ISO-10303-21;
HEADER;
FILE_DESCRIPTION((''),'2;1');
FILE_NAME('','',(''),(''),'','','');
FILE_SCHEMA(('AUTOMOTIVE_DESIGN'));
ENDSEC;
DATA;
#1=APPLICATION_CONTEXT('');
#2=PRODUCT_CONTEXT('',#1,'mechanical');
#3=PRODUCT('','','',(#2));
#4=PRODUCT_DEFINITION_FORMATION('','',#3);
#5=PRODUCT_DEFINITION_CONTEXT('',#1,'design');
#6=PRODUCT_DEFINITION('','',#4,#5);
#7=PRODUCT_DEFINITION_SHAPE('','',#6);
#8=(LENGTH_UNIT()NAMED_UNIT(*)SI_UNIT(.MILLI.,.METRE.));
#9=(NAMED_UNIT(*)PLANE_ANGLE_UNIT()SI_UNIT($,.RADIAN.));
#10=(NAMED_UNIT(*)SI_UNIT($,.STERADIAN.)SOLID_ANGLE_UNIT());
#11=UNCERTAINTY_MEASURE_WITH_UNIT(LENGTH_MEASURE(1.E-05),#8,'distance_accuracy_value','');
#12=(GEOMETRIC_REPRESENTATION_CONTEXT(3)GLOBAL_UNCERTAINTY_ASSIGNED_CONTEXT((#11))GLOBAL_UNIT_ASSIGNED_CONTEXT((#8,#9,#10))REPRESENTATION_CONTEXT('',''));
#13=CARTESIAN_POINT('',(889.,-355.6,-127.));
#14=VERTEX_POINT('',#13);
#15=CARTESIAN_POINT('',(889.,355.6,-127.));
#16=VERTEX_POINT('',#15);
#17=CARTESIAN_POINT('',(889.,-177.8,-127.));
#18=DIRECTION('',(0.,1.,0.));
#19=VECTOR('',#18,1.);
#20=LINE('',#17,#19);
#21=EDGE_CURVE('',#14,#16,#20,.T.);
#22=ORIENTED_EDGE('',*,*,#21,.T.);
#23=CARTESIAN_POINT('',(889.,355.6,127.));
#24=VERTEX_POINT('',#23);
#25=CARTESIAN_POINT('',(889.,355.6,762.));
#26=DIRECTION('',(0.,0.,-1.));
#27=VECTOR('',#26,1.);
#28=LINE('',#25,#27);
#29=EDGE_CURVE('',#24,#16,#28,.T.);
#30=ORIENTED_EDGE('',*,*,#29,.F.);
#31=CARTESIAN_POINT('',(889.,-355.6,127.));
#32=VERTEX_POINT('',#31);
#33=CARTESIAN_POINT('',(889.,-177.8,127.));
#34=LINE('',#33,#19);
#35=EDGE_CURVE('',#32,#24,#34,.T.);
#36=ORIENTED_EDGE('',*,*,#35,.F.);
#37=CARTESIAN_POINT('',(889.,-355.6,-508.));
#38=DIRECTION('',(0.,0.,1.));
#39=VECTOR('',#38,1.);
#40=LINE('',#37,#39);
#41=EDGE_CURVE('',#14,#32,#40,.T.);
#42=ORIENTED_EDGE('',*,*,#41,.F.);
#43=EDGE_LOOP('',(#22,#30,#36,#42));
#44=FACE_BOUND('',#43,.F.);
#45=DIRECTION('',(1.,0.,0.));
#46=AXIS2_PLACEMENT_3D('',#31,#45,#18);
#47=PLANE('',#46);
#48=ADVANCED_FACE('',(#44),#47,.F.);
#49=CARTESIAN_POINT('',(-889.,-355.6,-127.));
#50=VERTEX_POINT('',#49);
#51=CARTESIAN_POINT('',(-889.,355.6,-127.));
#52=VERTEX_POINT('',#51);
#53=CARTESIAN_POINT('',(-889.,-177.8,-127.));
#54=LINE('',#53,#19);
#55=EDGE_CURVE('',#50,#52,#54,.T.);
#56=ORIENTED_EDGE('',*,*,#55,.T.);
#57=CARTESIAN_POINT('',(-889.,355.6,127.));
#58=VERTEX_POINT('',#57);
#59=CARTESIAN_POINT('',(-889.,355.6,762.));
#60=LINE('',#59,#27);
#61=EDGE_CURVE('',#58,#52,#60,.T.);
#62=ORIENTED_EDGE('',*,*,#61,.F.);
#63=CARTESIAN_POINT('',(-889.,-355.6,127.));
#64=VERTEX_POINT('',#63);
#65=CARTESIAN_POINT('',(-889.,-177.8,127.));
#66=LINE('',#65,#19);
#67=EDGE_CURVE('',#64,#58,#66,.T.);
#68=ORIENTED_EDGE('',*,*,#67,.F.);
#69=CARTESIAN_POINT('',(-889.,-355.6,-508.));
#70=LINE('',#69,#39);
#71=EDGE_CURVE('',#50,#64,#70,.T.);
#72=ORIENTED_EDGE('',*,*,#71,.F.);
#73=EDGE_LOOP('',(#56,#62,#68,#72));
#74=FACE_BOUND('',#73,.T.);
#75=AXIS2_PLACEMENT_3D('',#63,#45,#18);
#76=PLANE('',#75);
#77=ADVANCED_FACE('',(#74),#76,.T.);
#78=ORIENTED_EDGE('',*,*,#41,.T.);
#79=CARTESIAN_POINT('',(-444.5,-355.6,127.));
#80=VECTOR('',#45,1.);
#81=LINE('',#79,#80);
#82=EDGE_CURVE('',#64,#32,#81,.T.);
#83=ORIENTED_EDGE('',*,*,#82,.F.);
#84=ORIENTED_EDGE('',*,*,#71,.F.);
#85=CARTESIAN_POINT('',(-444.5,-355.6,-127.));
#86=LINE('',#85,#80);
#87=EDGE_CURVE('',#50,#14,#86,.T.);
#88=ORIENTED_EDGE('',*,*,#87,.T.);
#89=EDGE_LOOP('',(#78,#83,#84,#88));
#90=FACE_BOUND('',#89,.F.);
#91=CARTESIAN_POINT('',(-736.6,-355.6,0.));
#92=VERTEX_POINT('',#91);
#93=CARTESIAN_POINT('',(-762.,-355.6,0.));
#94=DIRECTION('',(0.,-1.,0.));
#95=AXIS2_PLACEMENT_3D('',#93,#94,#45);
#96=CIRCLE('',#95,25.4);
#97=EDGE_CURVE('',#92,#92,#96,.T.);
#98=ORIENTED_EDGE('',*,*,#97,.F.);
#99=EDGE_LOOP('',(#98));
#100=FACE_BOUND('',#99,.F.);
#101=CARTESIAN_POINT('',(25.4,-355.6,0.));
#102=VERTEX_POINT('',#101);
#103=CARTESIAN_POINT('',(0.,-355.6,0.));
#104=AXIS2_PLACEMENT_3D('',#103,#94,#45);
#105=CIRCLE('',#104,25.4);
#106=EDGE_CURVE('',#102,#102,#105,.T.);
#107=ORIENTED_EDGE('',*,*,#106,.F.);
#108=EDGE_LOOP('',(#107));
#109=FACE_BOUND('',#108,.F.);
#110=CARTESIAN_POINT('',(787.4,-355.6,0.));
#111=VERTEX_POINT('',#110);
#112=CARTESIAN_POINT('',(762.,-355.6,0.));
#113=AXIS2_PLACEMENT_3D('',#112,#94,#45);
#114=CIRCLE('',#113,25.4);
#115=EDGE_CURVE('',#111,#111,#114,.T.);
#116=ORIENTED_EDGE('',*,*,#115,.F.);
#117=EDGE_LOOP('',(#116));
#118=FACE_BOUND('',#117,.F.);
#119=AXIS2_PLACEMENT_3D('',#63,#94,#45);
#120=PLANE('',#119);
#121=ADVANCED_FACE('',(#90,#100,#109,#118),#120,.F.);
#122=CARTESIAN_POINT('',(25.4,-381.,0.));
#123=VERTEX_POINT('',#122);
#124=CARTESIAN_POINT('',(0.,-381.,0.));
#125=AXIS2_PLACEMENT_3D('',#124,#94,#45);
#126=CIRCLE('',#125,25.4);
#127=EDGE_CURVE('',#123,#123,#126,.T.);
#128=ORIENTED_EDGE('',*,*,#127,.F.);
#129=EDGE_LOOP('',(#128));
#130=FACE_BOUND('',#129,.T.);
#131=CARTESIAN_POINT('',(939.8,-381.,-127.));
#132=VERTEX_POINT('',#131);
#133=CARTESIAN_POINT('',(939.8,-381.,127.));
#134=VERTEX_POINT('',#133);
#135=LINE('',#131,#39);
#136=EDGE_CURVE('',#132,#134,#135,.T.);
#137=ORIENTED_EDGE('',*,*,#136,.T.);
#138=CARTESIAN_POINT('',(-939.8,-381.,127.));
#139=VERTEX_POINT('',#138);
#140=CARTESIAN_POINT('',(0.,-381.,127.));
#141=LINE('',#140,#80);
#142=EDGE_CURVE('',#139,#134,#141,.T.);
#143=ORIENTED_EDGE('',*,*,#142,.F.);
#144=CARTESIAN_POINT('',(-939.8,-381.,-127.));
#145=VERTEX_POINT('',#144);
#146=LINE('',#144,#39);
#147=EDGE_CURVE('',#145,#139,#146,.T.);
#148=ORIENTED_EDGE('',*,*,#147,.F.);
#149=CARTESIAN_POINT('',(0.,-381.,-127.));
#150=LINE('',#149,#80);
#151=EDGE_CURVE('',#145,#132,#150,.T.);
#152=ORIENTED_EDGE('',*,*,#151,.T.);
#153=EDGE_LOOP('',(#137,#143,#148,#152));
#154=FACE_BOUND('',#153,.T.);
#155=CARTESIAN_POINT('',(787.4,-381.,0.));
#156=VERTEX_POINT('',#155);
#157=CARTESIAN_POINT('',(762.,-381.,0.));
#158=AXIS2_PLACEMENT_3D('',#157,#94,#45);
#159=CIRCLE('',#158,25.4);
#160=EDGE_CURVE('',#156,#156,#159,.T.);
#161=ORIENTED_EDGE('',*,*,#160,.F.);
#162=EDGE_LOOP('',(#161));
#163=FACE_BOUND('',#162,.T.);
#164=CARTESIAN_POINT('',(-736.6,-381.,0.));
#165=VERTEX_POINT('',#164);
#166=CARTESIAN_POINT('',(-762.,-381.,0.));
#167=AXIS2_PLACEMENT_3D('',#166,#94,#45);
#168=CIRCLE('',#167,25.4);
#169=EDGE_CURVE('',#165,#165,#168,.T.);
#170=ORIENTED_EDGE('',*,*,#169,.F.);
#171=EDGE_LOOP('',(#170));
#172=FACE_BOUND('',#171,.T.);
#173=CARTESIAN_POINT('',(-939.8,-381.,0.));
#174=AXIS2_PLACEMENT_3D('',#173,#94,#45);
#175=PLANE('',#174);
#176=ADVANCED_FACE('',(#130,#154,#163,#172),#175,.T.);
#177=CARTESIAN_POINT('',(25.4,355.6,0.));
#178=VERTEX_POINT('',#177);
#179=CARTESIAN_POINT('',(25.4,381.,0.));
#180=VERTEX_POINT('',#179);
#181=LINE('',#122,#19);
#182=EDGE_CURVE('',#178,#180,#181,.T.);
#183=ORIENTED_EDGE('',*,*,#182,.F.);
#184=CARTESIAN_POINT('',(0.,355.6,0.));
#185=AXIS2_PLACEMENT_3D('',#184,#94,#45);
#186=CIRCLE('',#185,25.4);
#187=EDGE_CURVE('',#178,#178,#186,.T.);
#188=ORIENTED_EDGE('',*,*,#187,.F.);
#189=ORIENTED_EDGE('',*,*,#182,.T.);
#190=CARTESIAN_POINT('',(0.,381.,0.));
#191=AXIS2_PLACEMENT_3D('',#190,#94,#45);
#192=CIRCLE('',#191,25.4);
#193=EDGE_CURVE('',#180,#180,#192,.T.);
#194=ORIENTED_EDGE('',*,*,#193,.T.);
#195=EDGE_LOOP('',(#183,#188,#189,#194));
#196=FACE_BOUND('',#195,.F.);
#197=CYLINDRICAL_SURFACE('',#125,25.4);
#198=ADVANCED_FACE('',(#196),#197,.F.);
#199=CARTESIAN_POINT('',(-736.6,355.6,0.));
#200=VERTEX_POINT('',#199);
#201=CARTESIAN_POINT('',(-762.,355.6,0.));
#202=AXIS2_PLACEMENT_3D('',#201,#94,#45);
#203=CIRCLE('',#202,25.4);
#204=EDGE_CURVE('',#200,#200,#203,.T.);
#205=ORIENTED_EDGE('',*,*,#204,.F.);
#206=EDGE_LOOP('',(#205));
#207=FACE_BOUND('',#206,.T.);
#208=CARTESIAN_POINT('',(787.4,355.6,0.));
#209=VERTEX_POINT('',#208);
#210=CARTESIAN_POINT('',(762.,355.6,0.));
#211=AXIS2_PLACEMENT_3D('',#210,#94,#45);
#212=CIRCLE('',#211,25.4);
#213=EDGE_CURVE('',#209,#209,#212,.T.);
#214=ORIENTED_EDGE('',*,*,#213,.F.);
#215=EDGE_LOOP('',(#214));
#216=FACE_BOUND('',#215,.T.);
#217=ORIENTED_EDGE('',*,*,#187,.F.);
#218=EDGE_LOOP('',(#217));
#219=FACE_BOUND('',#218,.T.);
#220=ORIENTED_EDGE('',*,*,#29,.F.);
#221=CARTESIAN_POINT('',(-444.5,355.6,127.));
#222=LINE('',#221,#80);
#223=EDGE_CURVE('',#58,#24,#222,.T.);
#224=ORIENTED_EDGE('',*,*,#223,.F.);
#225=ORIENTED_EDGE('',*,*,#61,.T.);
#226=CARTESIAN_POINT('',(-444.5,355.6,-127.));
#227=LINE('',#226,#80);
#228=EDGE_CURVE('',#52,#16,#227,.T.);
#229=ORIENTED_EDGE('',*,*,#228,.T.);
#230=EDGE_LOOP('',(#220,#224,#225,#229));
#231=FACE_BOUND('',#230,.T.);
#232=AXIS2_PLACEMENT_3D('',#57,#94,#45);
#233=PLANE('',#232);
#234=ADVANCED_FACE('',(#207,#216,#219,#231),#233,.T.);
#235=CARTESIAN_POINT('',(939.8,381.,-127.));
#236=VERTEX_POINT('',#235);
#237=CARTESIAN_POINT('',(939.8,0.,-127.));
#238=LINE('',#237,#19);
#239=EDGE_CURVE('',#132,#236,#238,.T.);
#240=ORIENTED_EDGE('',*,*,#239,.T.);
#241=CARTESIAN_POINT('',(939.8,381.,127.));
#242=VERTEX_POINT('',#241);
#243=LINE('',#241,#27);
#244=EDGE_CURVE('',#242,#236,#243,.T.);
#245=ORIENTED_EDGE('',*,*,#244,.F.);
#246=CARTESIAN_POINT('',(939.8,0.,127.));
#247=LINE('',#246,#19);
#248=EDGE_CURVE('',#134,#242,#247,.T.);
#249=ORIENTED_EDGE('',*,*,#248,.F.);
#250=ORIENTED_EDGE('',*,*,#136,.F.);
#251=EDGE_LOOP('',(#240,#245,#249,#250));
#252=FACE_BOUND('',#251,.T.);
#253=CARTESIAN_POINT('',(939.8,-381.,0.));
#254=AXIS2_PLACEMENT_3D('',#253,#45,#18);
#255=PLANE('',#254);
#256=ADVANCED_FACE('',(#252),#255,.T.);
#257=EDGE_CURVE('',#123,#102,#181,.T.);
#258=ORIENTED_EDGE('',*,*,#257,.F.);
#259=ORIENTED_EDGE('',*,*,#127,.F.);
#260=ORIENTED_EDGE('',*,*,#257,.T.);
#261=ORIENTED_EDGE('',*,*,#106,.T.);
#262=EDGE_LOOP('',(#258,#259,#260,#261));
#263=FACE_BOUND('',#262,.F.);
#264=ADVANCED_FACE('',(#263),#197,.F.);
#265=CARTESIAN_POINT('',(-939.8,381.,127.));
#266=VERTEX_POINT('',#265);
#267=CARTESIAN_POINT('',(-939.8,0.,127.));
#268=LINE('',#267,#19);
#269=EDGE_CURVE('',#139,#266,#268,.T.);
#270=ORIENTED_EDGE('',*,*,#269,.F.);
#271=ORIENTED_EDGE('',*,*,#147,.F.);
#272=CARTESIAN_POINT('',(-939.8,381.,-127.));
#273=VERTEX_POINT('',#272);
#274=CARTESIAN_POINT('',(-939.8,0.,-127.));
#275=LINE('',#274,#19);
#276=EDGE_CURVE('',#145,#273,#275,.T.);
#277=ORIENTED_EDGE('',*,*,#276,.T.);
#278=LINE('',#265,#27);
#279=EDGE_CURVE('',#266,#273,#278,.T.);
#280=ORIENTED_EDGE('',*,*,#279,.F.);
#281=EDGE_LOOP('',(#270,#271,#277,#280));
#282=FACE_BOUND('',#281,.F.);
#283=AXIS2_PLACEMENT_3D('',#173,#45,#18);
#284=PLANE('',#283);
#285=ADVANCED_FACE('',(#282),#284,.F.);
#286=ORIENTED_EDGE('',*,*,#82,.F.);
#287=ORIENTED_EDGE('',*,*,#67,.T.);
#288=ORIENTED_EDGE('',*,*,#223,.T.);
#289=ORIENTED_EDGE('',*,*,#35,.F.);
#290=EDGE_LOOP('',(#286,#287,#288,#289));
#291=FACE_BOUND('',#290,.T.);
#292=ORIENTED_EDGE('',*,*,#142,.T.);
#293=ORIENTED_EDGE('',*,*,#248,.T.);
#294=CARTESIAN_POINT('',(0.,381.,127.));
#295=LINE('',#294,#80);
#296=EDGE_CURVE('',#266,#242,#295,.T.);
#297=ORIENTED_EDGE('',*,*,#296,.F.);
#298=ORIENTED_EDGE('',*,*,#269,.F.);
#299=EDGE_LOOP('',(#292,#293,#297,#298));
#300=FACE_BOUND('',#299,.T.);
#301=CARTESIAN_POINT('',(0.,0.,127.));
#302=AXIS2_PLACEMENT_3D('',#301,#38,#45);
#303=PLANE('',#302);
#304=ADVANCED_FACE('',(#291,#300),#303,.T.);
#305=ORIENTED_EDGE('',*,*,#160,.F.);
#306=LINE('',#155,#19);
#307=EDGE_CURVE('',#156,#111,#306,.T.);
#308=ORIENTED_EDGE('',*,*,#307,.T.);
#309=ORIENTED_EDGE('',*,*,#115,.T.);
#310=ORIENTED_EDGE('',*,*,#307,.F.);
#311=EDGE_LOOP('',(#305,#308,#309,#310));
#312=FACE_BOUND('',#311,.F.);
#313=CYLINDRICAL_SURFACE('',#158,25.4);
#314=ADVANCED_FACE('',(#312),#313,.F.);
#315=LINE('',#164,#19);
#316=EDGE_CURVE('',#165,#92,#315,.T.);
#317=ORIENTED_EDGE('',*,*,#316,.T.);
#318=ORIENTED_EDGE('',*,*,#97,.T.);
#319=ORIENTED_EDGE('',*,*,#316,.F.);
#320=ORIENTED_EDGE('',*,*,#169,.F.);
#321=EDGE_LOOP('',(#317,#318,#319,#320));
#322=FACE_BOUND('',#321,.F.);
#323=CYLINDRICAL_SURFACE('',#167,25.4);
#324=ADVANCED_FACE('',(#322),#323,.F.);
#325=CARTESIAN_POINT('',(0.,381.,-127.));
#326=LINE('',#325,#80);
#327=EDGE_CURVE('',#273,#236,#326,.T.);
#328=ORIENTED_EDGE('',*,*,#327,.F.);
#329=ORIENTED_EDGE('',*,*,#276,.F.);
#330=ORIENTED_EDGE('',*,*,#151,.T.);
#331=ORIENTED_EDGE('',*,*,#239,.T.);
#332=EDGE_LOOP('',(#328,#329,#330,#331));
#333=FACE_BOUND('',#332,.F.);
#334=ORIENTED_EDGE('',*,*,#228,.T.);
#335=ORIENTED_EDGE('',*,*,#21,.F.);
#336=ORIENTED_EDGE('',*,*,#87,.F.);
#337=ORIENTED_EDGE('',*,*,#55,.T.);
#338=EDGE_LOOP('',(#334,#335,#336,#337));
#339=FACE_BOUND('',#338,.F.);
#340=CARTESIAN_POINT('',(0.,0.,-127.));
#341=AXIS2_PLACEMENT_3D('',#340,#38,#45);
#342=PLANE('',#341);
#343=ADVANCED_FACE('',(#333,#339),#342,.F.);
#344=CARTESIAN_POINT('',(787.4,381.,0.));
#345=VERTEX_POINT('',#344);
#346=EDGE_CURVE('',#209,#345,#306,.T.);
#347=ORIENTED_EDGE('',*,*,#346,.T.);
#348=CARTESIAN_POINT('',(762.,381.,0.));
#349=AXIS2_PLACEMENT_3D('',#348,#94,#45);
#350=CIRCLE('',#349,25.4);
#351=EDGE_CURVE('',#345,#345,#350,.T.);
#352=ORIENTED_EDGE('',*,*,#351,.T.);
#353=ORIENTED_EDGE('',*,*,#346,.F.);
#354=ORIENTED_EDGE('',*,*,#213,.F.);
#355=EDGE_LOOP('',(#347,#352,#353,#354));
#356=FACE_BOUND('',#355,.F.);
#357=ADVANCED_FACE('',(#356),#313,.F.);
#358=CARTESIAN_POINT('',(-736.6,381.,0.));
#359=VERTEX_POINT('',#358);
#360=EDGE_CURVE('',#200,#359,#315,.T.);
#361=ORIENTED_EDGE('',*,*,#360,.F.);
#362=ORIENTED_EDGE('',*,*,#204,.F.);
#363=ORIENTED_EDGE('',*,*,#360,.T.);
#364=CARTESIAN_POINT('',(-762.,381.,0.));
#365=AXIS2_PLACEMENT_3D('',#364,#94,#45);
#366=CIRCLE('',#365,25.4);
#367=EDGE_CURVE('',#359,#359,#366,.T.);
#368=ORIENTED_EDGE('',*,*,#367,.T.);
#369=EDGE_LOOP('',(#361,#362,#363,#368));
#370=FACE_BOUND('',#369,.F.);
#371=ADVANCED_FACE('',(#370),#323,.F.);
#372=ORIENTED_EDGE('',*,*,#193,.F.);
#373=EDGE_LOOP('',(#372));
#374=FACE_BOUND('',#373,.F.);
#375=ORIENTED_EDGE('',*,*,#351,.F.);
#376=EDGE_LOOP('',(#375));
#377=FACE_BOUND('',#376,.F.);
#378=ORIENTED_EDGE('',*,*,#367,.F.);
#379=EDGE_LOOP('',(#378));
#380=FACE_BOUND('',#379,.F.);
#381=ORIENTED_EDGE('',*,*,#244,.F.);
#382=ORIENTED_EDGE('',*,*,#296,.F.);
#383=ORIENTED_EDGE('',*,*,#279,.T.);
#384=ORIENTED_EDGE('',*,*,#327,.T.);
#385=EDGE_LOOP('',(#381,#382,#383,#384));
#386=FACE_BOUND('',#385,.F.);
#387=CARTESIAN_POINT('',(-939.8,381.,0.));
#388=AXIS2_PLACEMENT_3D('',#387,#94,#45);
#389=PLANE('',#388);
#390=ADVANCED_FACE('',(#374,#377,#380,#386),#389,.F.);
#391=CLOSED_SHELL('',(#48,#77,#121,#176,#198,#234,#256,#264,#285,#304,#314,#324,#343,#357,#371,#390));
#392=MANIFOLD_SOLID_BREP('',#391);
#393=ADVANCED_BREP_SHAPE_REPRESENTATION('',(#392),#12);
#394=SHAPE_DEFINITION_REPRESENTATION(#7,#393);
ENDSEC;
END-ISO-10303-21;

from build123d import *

# Parameters (mm, degrees)
F0_W     = 1879.6
F0_H     = 762
F1_DEPTH = 127
F2_W     = 1778
F2_H     = 711.2
F3_DEPTH = 635
F4_R     = 25.4
F5_DEPTH = 762.001


# Not quite as in the source:
# - a feature names something its author has since deleted; it is built from what else it names


with BuildPart() as f1:
    # F0 (on Top) → F1 (new body, symmetric)
    with BuildSketch(Plane.XY):
        Rectangle(F0_W, F0_H)
    extrude(amount=F1_DEPTH, both=True)

    # F2 (on face) → F3 (cut, symmetric)
    with BuildSketch(Plane.XY.offset(127)):
        Rectangle(F2_W, F2_H)
    extrude(amount=F3_DEPTH, both=True, mode=Mode.SUBTRACT)

    # F4 (on face) → F5 (cut, through all)
    with BuildSketch(Plane.XZ.offset(381)):
        with Locations((-762, 0)):
            Circle(F4_R)
        with Locations((762, 0)):
            Circle(F4_R)
        Circle(F4_R)
    extrude(amount=-F5_DEPTH, mode=Mode.SUBTRACT)


solid = f1.part
